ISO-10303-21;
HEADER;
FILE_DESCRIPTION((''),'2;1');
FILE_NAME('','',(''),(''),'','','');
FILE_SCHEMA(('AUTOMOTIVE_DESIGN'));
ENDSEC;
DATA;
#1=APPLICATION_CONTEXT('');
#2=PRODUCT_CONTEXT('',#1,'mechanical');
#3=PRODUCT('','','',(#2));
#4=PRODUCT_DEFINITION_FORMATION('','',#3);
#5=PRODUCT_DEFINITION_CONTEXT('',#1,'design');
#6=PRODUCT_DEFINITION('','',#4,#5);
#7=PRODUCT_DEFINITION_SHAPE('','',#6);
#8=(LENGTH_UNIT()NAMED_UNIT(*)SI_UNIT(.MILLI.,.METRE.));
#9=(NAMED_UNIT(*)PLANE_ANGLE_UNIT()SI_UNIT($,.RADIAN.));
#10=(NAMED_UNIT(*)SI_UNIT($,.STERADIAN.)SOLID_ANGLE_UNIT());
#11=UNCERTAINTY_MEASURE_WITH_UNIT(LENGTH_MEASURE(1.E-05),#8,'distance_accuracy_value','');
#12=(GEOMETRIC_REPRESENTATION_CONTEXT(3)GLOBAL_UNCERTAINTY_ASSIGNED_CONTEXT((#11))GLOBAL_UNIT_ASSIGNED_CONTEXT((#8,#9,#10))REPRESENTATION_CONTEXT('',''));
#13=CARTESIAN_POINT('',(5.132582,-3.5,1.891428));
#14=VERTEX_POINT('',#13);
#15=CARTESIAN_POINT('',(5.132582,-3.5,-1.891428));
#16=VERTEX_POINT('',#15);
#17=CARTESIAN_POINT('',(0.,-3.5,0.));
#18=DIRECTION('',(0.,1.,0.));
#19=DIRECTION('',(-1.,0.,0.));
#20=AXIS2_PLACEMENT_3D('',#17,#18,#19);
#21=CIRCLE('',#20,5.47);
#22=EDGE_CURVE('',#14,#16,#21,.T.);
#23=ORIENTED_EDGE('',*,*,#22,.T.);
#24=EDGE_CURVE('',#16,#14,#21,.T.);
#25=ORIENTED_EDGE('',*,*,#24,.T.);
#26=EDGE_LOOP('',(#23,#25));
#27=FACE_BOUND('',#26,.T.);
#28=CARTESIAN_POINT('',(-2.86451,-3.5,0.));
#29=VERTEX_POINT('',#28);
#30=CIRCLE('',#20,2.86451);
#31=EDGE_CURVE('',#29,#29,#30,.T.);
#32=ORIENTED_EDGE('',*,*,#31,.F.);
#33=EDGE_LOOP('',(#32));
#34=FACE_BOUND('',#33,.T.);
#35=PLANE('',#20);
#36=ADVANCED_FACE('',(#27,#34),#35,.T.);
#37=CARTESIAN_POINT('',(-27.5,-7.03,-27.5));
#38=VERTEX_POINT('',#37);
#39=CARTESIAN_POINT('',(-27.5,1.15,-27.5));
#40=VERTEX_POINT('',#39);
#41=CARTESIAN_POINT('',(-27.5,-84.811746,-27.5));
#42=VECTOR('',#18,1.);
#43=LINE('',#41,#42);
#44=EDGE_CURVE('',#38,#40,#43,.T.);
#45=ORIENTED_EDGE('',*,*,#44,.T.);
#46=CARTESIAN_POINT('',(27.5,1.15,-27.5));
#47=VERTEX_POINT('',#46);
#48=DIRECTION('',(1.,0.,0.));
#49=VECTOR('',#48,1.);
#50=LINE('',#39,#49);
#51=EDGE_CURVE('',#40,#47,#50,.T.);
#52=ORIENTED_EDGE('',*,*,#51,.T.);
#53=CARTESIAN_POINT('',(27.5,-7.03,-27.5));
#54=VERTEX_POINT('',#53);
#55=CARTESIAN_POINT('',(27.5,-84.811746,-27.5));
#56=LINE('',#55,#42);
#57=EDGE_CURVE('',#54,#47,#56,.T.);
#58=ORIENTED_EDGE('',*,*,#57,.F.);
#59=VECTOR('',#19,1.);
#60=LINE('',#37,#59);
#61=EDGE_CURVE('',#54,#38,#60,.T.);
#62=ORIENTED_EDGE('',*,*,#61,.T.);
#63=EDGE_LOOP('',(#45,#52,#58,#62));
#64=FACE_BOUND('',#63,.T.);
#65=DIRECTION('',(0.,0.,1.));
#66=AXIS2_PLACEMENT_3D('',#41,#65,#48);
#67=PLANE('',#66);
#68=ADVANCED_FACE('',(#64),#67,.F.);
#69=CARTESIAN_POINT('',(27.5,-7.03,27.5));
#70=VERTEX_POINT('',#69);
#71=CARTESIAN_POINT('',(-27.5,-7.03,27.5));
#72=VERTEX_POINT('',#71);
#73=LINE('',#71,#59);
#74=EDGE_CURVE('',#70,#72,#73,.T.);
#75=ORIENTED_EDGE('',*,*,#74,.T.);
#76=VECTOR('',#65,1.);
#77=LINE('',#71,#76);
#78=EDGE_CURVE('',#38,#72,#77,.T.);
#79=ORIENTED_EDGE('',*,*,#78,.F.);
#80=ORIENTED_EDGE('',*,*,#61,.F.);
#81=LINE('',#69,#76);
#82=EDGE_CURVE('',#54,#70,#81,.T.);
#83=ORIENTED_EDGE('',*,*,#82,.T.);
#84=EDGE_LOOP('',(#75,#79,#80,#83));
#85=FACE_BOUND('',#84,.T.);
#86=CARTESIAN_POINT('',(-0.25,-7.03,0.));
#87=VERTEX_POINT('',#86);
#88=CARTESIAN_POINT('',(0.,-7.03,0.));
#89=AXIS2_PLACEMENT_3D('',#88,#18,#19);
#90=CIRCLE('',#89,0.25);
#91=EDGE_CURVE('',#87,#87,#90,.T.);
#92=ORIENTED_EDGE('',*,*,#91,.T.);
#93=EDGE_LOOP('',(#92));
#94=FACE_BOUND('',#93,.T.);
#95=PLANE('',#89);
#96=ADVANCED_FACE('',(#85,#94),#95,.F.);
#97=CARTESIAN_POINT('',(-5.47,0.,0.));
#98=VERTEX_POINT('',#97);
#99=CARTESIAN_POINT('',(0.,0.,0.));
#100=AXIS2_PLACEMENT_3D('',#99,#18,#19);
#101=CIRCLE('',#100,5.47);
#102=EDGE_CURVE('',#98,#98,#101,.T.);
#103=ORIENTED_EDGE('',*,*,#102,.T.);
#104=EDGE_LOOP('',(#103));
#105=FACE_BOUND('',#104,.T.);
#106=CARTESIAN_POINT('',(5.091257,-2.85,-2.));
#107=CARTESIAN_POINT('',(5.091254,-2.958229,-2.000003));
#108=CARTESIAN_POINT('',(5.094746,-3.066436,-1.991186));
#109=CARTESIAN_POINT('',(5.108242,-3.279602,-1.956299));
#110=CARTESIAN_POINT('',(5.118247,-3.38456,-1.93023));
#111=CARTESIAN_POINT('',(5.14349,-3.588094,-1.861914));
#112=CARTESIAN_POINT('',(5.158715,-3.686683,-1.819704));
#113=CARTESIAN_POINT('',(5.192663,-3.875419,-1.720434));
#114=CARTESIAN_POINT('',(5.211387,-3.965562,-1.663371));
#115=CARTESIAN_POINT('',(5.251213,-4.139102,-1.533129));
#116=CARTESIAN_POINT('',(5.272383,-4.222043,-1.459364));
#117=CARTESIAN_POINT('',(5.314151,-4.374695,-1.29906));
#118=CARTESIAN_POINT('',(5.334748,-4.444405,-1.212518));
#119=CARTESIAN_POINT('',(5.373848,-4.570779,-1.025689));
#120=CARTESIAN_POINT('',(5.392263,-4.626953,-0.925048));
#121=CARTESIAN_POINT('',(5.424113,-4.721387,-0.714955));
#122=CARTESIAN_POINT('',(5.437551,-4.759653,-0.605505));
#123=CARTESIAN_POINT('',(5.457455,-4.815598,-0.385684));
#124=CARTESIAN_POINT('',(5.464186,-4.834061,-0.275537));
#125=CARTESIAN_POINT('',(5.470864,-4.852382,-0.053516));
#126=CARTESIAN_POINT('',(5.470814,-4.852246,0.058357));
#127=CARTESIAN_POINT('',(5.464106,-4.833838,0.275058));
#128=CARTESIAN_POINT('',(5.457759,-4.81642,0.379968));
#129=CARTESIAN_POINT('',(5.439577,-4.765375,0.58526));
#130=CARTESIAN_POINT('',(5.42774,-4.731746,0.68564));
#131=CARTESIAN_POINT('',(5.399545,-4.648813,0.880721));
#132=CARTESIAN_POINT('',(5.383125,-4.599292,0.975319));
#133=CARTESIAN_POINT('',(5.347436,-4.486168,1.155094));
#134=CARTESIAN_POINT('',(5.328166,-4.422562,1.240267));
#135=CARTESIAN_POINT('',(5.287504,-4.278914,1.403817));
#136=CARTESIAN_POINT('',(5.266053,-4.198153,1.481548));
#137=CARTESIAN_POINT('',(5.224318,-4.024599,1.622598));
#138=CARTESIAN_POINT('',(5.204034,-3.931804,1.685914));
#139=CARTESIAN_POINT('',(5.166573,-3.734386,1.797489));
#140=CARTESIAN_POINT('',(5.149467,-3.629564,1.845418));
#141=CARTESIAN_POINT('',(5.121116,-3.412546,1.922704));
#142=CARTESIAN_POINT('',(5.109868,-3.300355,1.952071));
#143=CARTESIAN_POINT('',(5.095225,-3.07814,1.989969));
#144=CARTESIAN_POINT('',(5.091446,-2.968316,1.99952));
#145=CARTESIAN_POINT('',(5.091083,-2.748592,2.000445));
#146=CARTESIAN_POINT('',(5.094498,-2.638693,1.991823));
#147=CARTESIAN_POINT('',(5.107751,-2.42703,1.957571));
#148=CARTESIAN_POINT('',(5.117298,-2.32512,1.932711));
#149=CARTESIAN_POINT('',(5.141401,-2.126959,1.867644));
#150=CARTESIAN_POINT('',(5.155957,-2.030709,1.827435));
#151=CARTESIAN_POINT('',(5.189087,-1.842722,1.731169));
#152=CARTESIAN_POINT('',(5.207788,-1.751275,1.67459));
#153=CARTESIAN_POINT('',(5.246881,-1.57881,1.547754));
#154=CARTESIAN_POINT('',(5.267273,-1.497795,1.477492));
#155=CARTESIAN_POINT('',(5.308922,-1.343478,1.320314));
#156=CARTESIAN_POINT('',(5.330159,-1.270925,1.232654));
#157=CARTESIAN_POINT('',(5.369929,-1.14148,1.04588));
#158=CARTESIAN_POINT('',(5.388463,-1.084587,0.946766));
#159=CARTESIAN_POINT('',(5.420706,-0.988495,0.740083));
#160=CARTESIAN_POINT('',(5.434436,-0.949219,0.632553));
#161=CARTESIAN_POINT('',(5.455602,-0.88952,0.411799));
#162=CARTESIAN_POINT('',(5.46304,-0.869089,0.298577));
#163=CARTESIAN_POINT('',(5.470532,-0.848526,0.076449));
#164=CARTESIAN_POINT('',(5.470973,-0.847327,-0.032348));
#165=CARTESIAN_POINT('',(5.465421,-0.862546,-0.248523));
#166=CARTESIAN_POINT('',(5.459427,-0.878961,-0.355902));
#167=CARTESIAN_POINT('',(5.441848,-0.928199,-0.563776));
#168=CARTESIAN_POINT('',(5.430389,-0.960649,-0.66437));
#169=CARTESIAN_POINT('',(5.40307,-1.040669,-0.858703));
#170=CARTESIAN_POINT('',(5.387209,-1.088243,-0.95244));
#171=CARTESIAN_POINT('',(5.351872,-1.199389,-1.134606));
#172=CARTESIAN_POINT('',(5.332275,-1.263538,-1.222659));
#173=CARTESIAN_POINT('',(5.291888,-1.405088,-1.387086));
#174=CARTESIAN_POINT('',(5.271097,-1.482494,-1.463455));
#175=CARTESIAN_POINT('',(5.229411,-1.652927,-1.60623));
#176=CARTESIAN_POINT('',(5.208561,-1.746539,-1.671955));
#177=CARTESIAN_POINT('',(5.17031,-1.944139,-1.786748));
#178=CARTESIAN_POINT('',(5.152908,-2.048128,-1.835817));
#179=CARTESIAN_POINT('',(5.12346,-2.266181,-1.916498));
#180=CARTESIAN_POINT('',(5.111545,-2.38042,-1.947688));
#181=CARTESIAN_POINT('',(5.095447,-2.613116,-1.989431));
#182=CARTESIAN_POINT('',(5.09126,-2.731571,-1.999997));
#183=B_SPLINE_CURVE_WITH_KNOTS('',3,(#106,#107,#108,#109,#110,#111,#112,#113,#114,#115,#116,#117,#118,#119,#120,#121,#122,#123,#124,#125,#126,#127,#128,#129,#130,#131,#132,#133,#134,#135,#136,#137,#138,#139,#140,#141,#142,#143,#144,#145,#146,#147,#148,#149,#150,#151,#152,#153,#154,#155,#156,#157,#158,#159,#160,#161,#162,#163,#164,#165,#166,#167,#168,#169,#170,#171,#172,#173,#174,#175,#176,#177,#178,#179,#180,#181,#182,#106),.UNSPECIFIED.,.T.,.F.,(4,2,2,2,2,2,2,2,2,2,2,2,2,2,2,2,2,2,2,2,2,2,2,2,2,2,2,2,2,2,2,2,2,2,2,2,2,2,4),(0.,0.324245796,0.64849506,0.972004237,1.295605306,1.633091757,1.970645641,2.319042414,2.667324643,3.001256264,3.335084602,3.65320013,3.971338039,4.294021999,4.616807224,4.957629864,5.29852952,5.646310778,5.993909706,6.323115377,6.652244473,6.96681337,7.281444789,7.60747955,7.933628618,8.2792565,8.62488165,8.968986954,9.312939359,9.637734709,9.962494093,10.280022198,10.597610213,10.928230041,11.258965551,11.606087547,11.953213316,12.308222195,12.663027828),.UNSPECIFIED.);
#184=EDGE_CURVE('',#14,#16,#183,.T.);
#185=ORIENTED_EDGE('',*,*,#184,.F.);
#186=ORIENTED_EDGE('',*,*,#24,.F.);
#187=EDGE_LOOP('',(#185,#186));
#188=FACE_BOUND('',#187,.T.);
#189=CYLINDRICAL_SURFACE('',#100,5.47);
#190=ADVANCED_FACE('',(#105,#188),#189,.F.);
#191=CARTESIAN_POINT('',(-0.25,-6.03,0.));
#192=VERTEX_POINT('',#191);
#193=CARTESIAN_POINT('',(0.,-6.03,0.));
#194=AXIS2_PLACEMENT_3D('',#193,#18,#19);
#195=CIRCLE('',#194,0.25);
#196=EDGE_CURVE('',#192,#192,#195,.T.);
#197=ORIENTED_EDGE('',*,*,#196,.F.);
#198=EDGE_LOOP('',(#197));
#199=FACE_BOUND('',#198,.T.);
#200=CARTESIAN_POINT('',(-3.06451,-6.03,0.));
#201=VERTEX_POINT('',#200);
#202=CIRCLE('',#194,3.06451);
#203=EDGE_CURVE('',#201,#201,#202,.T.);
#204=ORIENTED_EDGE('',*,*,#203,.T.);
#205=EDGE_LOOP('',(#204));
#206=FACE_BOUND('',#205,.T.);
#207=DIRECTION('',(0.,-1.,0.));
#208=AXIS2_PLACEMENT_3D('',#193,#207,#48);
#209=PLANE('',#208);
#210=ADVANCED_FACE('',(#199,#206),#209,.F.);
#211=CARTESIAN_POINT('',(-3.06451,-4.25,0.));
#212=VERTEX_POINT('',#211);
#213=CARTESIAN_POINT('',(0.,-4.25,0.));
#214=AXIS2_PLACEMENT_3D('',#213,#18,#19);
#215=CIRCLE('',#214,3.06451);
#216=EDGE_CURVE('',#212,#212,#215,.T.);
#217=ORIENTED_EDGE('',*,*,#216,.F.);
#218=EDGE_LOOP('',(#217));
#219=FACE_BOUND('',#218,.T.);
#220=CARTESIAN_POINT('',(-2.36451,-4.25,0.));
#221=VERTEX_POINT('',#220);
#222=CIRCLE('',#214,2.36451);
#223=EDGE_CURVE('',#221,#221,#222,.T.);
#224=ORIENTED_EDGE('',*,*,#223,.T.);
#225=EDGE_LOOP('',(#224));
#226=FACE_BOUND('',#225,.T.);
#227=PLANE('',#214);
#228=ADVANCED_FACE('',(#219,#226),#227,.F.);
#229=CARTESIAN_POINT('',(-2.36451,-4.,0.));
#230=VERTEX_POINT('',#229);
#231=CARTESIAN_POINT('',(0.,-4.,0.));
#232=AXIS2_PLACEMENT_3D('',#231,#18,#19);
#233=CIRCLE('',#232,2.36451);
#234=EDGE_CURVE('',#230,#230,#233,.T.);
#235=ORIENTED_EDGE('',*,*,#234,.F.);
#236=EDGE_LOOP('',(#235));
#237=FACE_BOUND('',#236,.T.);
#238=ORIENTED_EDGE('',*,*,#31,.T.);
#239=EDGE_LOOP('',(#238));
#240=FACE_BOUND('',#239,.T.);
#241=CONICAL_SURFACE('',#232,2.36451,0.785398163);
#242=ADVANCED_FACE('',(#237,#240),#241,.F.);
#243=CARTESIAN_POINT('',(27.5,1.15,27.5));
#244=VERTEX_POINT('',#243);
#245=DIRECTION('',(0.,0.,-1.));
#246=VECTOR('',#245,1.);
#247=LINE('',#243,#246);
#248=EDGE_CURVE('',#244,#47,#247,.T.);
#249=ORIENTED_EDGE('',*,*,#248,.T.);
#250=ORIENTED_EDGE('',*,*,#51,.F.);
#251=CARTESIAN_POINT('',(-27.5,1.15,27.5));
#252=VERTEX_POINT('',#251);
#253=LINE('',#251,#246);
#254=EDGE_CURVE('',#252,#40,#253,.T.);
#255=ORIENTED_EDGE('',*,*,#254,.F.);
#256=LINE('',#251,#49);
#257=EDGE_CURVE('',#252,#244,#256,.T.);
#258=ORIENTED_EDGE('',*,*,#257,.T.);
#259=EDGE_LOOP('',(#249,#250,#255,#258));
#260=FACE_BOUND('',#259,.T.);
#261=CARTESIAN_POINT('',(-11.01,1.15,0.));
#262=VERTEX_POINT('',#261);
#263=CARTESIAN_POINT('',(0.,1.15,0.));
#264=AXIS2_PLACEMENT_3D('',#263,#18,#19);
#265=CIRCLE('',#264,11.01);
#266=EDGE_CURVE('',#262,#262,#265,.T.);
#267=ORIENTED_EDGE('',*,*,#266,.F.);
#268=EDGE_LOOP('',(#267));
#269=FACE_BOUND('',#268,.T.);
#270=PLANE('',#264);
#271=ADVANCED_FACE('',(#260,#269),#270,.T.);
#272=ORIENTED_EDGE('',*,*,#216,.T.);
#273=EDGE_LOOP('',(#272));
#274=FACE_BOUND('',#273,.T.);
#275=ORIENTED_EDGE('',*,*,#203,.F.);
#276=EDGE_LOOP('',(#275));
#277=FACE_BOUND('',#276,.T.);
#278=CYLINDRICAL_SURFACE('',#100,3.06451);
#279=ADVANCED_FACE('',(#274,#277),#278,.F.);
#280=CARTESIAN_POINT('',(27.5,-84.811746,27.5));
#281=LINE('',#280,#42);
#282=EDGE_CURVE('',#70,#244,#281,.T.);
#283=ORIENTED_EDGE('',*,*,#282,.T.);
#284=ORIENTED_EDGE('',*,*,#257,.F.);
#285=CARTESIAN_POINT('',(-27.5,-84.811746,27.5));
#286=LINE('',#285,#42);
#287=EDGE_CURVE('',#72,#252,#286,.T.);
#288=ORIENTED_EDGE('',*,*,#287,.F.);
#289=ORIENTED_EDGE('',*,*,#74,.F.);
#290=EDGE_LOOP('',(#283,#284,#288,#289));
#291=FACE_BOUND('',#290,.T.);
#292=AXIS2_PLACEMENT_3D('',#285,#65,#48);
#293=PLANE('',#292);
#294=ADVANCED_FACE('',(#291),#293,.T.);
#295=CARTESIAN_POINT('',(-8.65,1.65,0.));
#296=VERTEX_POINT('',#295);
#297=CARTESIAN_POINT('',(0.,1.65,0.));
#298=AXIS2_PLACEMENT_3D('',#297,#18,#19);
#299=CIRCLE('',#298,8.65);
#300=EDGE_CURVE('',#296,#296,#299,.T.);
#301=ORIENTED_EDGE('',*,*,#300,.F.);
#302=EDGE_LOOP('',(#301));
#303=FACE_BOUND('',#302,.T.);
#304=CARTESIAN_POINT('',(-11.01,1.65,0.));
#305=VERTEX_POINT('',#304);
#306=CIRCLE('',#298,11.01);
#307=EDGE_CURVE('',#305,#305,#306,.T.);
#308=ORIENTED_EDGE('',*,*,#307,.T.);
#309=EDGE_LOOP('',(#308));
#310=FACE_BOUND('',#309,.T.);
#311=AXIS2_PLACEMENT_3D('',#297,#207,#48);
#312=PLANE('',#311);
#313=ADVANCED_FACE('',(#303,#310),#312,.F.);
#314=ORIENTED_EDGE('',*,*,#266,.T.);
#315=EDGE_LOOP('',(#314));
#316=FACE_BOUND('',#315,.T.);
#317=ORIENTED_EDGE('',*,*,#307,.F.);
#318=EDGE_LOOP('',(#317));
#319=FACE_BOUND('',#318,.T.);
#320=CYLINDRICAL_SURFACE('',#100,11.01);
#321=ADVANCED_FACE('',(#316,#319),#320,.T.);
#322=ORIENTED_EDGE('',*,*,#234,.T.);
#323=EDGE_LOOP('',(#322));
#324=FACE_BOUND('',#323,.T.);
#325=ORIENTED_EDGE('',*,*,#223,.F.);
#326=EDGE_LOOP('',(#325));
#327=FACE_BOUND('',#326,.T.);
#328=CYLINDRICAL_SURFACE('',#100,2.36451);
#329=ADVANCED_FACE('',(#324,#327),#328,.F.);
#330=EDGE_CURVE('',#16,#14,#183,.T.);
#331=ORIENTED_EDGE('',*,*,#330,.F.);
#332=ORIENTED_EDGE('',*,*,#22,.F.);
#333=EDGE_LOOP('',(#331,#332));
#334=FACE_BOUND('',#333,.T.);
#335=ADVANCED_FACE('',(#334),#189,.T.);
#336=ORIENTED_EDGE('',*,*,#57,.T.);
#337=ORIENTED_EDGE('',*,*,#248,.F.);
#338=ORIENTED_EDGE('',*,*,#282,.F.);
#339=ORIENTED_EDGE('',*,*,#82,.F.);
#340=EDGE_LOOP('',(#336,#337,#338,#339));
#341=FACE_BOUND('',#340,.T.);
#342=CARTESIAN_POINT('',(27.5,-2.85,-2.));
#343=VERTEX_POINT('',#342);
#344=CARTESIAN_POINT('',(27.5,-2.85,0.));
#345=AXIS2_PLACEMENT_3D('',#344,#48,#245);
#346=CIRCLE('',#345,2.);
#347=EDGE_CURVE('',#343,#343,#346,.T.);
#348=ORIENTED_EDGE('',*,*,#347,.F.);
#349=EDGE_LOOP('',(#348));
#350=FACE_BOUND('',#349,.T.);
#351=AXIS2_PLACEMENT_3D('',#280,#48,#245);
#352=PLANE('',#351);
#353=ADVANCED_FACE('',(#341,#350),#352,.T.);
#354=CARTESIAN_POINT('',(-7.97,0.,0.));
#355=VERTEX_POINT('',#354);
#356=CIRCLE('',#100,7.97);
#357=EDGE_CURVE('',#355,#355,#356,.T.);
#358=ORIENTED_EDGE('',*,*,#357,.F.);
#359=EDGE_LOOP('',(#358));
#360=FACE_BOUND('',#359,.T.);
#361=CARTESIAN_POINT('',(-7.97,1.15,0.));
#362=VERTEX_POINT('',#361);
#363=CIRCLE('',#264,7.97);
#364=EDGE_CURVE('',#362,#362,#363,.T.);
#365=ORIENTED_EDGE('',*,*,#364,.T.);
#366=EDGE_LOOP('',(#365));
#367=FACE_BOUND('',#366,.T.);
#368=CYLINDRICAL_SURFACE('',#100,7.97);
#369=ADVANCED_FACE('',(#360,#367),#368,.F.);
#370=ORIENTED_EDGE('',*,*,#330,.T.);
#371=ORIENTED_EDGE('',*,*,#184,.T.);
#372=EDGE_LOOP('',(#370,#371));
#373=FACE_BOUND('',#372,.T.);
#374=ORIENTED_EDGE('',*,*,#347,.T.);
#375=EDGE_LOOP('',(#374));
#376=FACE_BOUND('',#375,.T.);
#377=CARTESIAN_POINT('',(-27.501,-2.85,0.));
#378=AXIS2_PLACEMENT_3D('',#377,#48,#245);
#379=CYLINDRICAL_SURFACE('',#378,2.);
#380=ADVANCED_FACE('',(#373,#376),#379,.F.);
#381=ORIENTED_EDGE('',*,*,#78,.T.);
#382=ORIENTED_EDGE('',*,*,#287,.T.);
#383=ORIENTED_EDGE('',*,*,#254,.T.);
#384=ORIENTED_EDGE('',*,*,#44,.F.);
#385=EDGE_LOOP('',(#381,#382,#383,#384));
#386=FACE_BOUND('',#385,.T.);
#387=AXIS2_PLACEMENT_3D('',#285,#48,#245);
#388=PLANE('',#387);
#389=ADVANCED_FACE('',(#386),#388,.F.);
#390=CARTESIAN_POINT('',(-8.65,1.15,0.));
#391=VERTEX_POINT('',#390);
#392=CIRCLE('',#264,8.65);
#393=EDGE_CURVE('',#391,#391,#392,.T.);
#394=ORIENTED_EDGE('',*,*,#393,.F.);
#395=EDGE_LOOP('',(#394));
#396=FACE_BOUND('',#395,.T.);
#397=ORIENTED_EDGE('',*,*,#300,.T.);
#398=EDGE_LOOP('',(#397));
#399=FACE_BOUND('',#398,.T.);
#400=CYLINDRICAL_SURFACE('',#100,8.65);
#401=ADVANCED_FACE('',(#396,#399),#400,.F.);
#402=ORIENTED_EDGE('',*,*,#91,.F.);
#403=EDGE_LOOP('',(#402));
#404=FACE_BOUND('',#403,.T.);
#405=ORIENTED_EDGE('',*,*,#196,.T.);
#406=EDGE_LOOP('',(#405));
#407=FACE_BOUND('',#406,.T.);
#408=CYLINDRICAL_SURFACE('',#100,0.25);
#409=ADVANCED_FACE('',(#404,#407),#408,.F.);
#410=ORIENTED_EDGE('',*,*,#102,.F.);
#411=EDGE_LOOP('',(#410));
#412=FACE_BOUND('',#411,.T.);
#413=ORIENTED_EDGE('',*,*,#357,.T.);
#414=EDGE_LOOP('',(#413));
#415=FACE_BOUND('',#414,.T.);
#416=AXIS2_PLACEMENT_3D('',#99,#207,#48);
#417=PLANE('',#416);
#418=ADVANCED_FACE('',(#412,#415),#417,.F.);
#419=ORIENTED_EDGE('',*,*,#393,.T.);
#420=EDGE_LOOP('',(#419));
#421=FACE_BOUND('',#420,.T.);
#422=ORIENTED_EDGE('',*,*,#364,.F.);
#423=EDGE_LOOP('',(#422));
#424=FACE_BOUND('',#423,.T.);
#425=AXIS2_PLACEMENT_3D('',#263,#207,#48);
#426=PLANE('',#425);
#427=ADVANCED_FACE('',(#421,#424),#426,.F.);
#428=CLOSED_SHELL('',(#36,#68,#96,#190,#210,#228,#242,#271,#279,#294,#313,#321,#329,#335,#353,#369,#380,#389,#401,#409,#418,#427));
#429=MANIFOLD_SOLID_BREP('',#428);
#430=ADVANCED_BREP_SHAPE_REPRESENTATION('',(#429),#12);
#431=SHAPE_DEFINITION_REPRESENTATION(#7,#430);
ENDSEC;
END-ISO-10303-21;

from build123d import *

# Parameters (mm, degrees)
SKETCH2_W               = 55
SKETCH2_H               = 55
SKETCH2_R               = 20
BOSS_EXTRUDE1_DEPTH     = 8.18
CUT_EXTRUDE1_REACH      = 63.892
CUT_EXTRUDE1_END_RADIUS = 5.47
SKETCH3_R               = 2


# Read off the part's stored shape, not the designer's step: Revolve2
with BuildPart() as part:
    # Revolve2 outline → Revolve2 (revolve)
    with BuildSketch(Plane.XY):
        Polygon((2.86451, -3.5), (2.36451, -4), (2.36451, -4.25), (3.06451, -4.25), (3.06451, -6.03), (0.25, -6.03), (0.25, -7.03), (20, -7.03), (20, 1.15), (11.01, 1.15), (11.01, 1.65), (8.65, 1.65), (8.65, 1.15), (7.97, 1.15), (7.97, 0), (5.47, 0), (5.47, -3.5), align=None)
    revolve(axis=Axis((0, 0, 0), (0, 1, 0)))

    # Sketch2 → Boss-Extrude1 (add)
    with BuildSketch(Plane(origin=(0, 1.15, 0), x_dir=(1, 0, 0), z_dir=(0, 1, 0))):
        Rectangle(SKETCH2_W, SKETCH2_H)
        Circle(SKETCH2_R, mode=Mode.SUBTRACT)
    extrude(amount=-BOSS_EXTRUDE1_DEPTH)

    # Cut-Extrude1: up to this cylinder (the profile starts outside it)
    cut_extrude1_end = Plane(origin=(0, -2.85, 0), z_dir=(0, 1, 0)) * Cylinder(CUT_EXTRUDE1_END_RADIUS, 139.724, mode=Mode.PRIVATE)
    # Sketch3 → Cut-Extrude1 (cut, up to the surface)
    with BuildSketch(Plane(origin=(27.5, 0, 0), x_dir=(0, 0, -1), z_dir=(1, 0, 0)), mode=Mode.PRIVATE) as cut_extrude1_sk1:
        with Locations((0, -2.85)):
            Circle(SKETCH3_R)
    cut_extrude1_tool1 = extrude(cut_extrude1_sk1.sketch, amount=-CUT_EXTRUDE1_REACH, mode=Mode.PRIVATE) - cut_extrude1_end
    add(cut_extrude1_tool1.solids().sort_by_distance((27.5, -2.85, 0))[0], mode=Mode.SUBTRACT)


solid = part.part
